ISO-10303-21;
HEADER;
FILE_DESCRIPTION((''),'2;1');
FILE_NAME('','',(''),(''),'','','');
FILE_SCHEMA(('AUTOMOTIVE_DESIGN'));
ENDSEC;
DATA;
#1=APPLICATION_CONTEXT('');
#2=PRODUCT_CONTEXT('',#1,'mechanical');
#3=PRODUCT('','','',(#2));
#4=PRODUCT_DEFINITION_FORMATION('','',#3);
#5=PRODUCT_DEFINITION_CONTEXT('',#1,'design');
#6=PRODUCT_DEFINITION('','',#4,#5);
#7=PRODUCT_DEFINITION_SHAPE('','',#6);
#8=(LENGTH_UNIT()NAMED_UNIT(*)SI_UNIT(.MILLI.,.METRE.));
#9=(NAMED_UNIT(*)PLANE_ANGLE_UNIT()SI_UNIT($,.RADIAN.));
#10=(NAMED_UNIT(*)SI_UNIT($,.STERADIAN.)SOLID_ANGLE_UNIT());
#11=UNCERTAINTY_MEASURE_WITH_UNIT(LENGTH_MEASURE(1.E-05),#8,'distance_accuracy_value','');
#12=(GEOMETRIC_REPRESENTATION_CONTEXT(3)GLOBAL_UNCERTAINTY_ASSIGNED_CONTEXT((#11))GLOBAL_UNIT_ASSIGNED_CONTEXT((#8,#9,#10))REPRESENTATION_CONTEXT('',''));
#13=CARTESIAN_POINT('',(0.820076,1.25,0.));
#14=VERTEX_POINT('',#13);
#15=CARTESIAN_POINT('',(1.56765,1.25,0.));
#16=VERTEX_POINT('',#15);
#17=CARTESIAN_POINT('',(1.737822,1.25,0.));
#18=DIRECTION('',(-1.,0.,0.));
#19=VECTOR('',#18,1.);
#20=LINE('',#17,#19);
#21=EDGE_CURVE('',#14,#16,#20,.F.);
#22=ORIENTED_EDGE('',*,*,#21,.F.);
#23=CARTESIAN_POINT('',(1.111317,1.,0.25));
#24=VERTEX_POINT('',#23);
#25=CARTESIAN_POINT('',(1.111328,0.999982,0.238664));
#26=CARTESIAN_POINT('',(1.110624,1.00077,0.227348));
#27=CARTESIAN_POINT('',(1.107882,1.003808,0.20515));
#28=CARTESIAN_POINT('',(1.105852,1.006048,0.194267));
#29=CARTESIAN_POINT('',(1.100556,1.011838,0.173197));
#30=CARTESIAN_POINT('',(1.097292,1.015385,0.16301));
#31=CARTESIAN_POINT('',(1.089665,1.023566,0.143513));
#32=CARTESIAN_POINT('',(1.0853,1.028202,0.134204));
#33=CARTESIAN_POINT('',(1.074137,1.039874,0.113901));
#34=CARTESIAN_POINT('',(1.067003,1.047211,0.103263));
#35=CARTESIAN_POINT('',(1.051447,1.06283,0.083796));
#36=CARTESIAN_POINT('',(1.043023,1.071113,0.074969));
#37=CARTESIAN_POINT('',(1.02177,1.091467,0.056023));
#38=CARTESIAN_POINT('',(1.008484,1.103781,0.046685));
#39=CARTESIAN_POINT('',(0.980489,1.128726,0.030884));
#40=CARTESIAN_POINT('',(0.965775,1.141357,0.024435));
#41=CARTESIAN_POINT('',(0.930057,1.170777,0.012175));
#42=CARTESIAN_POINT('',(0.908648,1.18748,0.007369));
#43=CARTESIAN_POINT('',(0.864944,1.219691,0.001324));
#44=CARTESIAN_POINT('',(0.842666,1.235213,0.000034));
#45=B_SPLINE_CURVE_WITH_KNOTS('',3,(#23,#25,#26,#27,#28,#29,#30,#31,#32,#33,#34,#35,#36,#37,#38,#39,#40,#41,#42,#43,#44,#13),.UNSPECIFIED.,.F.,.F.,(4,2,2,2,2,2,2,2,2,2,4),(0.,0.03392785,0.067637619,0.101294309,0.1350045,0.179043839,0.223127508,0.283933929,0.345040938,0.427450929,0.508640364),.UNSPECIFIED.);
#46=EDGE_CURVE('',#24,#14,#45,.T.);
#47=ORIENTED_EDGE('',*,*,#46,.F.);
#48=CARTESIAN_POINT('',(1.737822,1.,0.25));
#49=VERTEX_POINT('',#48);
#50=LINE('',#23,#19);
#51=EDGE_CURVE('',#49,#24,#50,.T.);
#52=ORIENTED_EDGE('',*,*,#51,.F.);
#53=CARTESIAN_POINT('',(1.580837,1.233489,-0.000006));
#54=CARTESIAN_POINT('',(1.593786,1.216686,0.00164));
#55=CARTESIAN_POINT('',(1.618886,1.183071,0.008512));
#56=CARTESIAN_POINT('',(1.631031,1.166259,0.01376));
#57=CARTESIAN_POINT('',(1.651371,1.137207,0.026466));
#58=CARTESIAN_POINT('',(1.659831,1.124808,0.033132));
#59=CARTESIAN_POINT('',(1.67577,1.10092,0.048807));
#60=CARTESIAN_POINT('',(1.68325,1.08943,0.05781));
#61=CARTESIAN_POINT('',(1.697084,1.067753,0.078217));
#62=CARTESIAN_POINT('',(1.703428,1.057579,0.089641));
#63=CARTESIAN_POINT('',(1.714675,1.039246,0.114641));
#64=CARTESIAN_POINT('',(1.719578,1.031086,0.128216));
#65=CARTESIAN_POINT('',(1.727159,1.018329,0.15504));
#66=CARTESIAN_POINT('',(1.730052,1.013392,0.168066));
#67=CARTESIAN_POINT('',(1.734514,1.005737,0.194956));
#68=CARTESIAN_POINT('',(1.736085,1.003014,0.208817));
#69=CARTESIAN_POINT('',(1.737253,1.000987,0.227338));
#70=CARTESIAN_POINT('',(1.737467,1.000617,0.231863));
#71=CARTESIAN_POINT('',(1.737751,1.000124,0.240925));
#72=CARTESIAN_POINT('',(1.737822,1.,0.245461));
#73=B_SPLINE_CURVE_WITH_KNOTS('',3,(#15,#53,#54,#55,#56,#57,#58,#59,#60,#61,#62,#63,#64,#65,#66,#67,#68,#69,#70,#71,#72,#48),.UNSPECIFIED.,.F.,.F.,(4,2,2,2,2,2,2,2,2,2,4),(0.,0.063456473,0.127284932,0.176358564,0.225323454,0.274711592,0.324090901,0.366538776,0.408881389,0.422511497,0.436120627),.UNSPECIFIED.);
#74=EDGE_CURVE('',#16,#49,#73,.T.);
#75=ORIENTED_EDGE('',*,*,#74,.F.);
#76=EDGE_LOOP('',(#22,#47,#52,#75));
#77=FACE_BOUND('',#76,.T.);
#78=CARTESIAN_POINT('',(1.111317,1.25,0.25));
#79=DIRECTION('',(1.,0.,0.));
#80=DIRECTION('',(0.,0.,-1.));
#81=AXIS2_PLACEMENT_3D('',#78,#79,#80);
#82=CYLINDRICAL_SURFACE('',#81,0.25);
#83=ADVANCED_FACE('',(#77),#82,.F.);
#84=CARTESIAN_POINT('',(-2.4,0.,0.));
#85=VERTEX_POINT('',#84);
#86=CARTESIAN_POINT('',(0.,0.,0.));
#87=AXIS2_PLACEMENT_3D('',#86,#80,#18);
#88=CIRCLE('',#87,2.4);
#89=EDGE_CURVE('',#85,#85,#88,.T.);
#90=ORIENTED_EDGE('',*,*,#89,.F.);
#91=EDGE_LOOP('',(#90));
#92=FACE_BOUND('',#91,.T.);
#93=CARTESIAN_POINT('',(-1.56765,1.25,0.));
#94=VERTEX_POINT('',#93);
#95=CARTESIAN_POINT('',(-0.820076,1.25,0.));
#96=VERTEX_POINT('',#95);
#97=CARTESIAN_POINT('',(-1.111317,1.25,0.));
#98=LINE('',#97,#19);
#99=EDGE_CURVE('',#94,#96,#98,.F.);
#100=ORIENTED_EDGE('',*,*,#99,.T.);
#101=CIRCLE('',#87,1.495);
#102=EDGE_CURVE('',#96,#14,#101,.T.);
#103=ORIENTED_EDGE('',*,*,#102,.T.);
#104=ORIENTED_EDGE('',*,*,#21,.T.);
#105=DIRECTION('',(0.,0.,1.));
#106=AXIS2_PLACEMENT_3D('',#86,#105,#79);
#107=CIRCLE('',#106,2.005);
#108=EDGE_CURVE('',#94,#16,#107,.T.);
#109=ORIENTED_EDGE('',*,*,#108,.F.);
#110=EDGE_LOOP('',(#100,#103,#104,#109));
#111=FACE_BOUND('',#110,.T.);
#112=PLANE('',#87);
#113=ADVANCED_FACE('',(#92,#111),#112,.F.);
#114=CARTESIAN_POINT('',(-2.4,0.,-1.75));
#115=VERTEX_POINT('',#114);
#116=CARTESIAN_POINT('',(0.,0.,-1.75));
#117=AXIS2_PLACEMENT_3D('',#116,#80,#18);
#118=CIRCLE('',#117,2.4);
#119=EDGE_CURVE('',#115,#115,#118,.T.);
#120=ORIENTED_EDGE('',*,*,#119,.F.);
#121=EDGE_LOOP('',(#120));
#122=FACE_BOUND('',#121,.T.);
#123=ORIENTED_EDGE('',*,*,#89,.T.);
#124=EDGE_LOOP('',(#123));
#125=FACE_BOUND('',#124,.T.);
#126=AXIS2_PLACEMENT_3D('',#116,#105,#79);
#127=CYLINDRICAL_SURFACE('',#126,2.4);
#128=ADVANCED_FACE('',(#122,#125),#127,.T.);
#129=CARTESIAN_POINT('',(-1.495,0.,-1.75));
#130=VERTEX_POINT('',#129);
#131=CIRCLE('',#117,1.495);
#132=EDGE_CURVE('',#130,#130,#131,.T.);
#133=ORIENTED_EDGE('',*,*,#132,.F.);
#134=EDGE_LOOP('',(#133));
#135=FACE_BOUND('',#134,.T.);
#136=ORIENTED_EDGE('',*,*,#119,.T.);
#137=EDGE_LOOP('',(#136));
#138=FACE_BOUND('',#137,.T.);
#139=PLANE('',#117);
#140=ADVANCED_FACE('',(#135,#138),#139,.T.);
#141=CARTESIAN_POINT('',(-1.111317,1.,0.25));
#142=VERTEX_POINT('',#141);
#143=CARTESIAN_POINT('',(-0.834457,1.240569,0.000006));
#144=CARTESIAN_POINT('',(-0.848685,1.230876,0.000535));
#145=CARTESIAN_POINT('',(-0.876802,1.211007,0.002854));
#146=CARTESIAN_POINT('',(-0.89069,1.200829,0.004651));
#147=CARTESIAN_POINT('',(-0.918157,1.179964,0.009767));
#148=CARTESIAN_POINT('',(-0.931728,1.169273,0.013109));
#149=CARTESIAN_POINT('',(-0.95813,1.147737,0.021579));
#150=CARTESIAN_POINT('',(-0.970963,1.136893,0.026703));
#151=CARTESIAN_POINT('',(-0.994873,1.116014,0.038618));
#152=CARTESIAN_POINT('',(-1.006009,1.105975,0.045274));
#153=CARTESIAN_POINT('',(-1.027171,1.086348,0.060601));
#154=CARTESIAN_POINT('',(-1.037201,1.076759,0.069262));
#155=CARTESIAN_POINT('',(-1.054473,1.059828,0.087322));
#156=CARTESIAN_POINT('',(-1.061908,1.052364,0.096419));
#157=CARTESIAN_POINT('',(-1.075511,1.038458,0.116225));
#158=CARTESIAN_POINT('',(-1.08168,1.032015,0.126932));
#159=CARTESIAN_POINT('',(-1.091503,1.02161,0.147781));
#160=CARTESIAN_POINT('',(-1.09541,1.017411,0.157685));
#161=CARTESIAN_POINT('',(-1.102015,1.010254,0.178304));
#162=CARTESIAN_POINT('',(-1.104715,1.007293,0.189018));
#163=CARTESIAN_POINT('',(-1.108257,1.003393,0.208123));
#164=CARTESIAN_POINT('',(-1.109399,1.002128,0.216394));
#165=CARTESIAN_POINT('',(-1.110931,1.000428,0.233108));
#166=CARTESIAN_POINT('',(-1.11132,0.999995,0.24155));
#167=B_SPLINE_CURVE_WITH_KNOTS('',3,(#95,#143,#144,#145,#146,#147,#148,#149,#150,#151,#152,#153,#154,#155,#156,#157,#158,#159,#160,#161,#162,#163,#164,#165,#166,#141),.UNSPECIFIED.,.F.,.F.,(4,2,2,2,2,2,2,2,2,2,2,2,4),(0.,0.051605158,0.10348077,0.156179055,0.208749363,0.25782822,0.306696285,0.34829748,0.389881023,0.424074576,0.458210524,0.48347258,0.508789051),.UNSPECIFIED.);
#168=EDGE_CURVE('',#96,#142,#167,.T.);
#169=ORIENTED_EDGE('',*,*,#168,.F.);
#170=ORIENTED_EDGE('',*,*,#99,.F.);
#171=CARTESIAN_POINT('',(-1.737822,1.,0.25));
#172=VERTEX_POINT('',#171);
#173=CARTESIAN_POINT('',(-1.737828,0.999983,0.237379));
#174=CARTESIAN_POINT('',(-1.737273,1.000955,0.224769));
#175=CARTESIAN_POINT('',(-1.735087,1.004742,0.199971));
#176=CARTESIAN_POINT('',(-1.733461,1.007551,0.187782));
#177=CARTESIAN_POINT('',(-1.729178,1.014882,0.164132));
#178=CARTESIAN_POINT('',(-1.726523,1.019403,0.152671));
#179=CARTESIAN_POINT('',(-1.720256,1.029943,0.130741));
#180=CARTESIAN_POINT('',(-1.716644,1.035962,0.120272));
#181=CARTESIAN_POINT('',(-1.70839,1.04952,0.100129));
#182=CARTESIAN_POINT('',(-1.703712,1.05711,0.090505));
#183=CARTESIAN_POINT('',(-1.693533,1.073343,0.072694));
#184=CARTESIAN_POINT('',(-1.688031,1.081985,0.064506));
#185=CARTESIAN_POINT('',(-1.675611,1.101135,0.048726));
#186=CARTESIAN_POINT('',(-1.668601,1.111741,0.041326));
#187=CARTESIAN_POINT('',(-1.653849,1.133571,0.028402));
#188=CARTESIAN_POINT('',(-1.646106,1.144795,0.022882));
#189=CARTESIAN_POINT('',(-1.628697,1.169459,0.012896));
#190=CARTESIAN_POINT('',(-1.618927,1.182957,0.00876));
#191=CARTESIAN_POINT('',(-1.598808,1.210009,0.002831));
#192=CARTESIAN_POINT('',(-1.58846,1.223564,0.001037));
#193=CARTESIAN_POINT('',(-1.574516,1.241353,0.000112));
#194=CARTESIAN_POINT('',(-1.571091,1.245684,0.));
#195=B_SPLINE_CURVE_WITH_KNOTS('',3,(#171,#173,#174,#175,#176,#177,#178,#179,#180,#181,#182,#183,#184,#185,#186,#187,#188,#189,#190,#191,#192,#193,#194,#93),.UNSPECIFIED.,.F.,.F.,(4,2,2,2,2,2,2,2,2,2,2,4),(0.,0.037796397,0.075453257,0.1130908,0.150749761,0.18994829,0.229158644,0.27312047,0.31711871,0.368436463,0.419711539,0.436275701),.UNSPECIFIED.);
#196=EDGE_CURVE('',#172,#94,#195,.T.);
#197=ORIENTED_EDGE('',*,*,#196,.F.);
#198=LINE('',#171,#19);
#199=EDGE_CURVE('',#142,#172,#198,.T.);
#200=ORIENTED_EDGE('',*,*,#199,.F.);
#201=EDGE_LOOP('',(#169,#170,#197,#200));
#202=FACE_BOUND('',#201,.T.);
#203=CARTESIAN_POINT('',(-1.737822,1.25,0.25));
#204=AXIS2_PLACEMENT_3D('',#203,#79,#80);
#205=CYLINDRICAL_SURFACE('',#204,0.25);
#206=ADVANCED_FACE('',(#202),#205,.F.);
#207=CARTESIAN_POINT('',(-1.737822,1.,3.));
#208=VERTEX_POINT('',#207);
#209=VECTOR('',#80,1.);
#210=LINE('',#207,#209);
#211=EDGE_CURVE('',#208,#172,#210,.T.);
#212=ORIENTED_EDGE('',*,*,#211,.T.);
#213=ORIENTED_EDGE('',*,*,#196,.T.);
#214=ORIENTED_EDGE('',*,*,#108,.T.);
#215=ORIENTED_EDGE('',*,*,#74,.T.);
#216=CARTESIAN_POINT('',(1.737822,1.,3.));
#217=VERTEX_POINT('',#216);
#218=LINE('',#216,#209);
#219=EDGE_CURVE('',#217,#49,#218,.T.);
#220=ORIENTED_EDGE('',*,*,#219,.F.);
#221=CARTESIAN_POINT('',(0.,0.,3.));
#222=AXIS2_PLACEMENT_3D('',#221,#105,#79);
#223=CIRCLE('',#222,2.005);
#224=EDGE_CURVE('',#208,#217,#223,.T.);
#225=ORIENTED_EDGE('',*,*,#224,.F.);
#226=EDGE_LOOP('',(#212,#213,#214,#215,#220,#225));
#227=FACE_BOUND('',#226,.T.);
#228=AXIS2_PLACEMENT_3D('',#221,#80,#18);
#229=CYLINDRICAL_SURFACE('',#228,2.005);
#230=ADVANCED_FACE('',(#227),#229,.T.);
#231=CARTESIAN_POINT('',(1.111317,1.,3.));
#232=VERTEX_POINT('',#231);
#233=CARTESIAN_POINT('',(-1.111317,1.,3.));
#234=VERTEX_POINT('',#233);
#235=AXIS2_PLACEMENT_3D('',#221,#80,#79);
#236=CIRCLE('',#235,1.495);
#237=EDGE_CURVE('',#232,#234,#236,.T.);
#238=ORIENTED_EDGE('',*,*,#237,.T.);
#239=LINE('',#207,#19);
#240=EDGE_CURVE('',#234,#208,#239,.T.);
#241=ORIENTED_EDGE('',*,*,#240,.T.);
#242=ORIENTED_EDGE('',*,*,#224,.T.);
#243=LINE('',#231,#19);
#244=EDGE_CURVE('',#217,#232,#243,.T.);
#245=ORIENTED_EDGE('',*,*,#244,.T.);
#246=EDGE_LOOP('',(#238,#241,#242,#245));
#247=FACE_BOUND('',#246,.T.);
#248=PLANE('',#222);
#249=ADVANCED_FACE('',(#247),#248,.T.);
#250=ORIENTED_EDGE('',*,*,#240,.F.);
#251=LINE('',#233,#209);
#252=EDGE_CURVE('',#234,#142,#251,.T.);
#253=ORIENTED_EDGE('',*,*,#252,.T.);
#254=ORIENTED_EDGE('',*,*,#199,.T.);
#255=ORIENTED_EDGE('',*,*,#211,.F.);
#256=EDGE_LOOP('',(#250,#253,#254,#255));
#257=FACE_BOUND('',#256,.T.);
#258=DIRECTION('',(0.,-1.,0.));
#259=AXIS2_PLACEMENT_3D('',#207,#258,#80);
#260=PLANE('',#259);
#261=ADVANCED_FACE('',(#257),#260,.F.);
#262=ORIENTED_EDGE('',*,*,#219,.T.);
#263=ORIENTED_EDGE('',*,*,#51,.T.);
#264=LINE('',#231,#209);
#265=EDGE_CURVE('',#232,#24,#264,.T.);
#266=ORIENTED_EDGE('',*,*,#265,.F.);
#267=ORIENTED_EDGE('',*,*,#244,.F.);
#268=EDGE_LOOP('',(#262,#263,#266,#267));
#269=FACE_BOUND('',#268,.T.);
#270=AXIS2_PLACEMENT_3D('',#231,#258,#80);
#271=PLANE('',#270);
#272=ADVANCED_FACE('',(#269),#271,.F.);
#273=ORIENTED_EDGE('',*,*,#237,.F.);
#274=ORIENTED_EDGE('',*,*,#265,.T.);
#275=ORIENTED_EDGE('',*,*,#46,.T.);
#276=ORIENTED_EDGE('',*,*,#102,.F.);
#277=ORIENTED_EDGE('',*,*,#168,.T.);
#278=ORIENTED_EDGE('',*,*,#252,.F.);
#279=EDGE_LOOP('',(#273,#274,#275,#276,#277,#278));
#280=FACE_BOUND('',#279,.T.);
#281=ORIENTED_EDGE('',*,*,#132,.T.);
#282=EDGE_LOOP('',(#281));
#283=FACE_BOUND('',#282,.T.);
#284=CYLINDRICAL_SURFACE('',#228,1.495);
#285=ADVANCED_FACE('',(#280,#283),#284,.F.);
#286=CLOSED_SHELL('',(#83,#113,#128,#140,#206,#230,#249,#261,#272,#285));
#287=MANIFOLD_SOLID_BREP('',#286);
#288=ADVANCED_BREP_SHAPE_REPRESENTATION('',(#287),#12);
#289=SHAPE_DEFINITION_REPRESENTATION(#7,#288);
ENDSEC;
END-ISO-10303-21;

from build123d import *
from build123d.topology import SkipClean

# Parameters (mm, degrees)
BOSS_EXTRUDE1_DEPTH = 3
BOSS_EXTRUDE2_START = 1.75
SKETCH2_R           = 2.4
SKETCH2_R_2         = 1.495
BOSS_EXTRUDE2_DEPTH = 1.75
FILLET1_R           = 0.25


with BuildPart() as part:
    # Sketch1 → Boss-Extrude1 (new body)
    with BuildSketch(Plane.XY):
        with BuildLine():
            Line((-1.737821913, 1), (-1.111316787, 1))
            ThreePointArc((-1.111316787, 1), (0, -1.495), (1.111316787, 1))
            Line((1.111316787, 1), (1.737821913, 1))
            ThreePointArc((1.737821913, 1), (0, -2.005), (-1.737821913, 1))
        make_face()
    extrude(amount=BOSS_EXTRUDE1_DEPTH)

    # Sketch2 → Boss-Extrude2 (add)
    with SkipClean():  # the faces are left unmerged after this step: merging them gives an invalid solid
        with BuildSketch(Plane(origin=(0, 0, 0), x_dir=(-1, 0, 0), z_dir=(0, 0, -1)).offset(BOSS_EXTRUDE2_START)):
            Circle(SKETCH2_R)
            Circle(SKETCH2_R_2, mode=Mode.SUBTRACT)
        extrude(amount=-BOSS_EXTRUDE2_DEPTH)

    # Fillet1
    # the kernel refuses this fillet: 0.25 mm, written as the material it adds along each edge
    with BuildSketch(Plane(origin=(-2.362821913, 1, 0), x_dir=(0, 0, 1), z_dir=(1, 0, 0))) as fillet1_piece_1_section:
        with BuildLine():
            CenterArc((FILLET1_R, -FILLET1_R), FILLET1_R, 90, 90)
            Line((0, -FILLET1_R), (0, 0))
            Line((0, 0), (FILLET1_R, 0))
        make_face()
    fillet1_piece_1 = extrude(amount=1.876505126, mode=Mode.PRIVATE)
    fillet1_piece_1 = fillet1_piece_1 & Plane(origin=(0, 0, 0.055527153), x_dir=(0.8667440960723748, 0.49875311720698257, 0), z_dir=(0, 0, -1)) * Cylinder(2.005, 5, mode=Mode.PRIVATE)
    fillet1_piece_1 = fillet1_piece_1 - Plane(origin=(0, 0, 0.055527153), x_dir=(-0.7433557100464799, 0.6688963210702342, 0), z_dir=(0, 0, -1)) * Cylinder(1.495, 5, mode=Mode.PRIVATE)
    add(fillet1_piece_1)
    with BuildSketch(Plane(origin=(0.486316787, 1, 0), x_dir=(0, 0, 1), z_dir=(1, 0, 0))) as fillet1_piece_2_section:
        with BuildLine():
            CenterArc((FILLET1_R, -FILLET1_R), FILLET1_R, 90, 90)
            Line((0, -FILLET1_R), (0, 0))
            Line((0, 0), (FILLET1_R, 0))
        make_face()
    fillet1_piece_2 = extrude(amount=1.876505126, mode=Mode.PRIVATE)
    fillet1_piece_2 = fillet1_piece_2 & Plane(origin=(0, 0, 0.055527144), x_dir=(0.8667440960723748, 0.49875311720698257, 0), z_dir=(0, 0, -1)) * Cylinder(2.005, 5, mode=Mode.PRIVATE)
    fillet1_piece_2 = fillet1_piece_2 - Plane(origin=(0, 0, 0.055527144), x_dir=(-0.7433557100464799, 0.6688963210702342, 0), z_dir=(0, 0, -1)) * Cylinder(1.495, 5, mode=Mode.PRIVATE)
    add(fillet1_piece_2)


solid = part.part
